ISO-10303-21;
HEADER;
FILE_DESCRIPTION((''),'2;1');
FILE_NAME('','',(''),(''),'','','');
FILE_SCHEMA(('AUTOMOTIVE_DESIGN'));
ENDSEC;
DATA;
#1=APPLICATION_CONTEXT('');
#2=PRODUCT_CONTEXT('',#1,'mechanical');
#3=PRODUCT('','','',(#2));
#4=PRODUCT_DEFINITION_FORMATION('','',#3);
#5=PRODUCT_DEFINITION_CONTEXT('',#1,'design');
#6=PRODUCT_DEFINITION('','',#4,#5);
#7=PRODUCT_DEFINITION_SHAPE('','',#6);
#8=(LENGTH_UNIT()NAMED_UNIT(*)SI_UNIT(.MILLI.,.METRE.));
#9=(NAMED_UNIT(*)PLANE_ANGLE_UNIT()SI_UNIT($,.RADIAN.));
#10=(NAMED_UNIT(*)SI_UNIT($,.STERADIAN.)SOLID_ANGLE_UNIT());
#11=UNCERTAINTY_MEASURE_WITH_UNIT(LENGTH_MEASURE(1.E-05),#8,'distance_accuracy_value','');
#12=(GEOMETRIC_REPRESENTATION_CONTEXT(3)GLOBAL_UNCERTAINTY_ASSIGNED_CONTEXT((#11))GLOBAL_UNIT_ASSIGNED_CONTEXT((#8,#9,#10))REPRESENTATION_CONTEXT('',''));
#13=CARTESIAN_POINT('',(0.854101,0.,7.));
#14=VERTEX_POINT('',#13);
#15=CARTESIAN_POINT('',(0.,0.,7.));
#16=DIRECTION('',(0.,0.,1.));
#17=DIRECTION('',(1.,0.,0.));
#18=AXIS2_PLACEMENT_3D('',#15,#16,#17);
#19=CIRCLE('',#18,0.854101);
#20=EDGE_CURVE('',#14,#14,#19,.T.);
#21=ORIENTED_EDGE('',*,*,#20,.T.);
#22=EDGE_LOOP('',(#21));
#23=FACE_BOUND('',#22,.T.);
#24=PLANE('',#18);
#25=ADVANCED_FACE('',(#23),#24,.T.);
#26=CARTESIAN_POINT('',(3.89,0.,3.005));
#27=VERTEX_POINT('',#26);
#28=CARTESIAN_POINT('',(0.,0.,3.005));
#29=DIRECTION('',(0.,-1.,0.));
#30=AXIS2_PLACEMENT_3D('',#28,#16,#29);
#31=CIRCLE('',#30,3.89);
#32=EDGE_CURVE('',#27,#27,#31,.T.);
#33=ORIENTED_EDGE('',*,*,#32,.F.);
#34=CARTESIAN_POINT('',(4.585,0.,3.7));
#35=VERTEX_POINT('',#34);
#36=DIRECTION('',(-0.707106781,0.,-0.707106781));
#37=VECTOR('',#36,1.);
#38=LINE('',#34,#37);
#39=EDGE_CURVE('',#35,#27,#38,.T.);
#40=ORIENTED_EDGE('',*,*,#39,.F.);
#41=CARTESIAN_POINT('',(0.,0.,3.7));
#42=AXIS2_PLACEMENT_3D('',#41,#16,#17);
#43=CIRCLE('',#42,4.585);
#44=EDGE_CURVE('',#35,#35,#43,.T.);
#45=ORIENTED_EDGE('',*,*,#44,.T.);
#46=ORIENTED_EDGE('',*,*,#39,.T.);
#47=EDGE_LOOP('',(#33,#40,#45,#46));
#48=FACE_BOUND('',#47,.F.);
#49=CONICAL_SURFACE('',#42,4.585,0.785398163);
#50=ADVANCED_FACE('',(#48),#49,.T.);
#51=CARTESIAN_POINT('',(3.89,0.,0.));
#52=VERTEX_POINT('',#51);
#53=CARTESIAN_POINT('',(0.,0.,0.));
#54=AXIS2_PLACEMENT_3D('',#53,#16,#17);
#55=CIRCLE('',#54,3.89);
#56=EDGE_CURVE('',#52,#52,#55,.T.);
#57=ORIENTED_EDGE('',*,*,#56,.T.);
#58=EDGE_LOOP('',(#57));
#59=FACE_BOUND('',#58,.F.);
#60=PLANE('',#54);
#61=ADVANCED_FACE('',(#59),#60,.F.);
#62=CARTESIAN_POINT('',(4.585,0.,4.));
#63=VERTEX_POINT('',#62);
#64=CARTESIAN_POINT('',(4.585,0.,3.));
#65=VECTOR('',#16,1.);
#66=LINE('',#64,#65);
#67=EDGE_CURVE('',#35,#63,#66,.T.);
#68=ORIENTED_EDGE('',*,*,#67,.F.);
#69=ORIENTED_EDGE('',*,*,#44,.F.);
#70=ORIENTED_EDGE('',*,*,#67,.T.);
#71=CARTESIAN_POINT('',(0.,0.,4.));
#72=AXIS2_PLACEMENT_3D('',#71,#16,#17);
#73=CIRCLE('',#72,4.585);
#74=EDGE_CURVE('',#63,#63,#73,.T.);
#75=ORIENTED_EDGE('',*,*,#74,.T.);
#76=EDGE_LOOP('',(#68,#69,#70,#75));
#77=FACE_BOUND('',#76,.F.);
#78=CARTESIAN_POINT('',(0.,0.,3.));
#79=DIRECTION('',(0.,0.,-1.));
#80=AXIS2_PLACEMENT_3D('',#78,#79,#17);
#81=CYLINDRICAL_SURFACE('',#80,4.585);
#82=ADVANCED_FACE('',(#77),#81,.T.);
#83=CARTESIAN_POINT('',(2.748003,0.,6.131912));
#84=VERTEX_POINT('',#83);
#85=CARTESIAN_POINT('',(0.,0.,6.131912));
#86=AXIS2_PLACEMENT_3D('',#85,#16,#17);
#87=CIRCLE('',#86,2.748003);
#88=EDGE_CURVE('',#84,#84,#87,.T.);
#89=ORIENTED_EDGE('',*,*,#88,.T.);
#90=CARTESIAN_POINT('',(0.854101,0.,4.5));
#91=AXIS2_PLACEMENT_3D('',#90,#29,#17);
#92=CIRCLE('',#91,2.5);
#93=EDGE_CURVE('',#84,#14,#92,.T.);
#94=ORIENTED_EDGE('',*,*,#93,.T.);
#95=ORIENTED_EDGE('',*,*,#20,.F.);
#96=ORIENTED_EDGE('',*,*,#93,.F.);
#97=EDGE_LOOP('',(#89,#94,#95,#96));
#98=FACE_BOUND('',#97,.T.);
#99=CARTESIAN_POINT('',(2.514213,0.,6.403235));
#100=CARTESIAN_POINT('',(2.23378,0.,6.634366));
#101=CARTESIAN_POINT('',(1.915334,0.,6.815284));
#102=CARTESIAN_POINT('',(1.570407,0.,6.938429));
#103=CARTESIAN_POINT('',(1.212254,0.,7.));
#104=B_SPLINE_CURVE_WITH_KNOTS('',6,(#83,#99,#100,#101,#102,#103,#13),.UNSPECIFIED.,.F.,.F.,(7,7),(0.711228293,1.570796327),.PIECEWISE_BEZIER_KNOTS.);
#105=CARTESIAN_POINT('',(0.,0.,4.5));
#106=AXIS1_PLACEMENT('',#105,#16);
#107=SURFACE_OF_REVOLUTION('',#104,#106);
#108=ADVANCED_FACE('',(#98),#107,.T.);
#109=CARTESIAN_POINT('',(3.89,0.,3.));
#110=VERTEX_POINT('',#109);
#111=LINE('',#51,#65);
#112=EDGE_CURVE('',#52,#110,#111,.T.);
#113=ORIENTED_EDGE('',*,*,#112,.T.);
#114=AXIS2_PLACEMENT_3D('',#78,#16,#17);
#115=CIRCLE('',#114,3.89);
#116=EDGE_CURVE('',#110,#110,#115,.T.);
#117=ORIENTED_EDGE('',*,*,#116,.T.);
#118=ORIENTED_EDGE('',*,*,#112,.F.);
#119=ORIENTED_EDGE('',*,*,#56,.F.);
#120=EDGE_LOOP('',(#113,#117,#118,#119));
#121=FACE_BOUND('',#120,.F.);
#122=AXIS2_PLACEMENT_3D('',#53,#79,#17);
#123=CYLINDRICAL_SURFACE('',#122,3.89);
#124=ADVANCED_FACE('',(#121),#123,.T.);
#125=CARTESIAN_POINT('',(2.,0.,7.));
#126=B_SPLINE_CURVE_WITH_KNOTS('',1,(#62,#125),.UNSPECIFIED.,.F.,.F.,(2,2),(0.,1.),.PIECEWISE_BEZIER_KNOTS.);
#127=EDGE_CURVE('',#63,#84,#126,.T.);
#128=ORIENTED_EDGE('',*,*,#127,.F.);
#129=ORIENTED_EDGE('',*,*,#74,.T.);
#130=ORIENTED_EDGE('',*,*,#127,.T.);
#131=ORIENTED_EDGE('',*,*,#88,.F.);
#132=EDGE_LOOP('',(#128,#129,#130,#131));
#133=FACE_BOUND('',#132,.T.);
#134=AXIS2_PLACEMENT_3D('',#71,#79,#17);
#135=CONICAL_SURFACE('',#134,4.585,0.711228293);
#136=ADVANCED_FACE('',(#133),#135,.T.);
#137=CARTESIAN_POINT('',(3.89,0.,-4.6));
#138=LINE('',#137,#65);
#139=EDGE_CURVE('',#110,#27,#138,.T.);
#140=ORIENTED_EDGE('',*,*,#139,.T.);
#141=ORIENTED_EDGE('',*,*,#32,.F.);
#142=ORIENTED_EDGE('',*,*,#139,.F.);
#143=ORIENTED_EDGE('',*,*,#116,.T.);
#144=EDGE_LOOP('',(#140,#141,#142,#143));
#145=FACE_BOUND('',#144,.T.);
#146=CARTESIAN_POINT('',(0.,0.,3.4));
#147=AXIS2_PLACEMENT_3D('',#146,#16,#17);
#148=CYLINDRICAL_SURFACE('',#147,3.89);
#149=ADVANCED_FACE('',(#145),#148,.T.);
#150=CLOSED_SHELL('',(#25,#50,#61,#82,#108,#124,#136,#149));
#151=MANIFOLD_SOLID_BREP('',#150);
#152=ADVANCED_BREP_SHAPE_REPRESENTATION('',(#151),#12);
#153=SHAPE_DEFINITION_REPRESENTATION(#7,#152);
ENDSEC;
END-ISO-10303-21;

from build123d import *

# Parameters (mm, degrees)
F0_R        = 3.89
F1_DEPTH    = 3
F2_R        = 4.585
F2_R_2      = 3.89
F5_DEPTH    = 1
F5_FACE_R   = 4.585
F4_R        = 2
F7_R        = 2.5
F8_S5_R     = 3.89
F8_T6_DEPTH = 8


# Not quite as in the source:
# - a fillet or chamfer that OpenCascade refuses, or shapes differently, is made with other operations: its cross-section is extruded or revolved along the edge and cut away or added


with BuildPart() as f1:
    # F0 (on Top) → F1 (new body)
    with BuildSketch(Plane.XY):
        Circle(F0_R)
    extrude(amount=F1_DEPTH)

    # F2 (on face) → F5 (join)
    with BuildSketch(Plane.XY.offset(3)):
        Circle(F2_R)
        Circle(F2_R_2, mode=Mode.SUBTRACT)
        Circle(F2_R_2)
    extrude(amount=F5_DEPTH)

    # F5_face (on face) → F6 section 0
    with BuildSketch(Plane.XY.offset(4)):
        Circle(F5_FACE_R)
    # F4 (on offset) → F6 section 1
    with BuildSketch(Plane.XY.offset(7)):
        Circle(F4_R)
    loft()

    # F7
    f7_edges = [f1.edges().sort_by_distance(p)[0] for p in [
        (-2, 0, 7),
    ]]
    fillet(f7_edges, radius=F7_R)

    # F8: chamfer of 0.7 on 1 edges, made by hand


with BuildPart() as f8_tool2:
    # F8_s3 → F8_t4 (revolve)
    with BuildSketch(Plane.XZ):
        Polygon((4.585, 3.7), (3.885, 3), (4.585, 3), align=None)
    revolve(axis=Axis((0, 0, 3), (0, 0, 1)))

    # F8_s5 → F8_t6 (cut, symmetric)
    with BuildSketch(Plane.XY.offset(3.4)):
        Circle(F8_S5_R)
    extrude(amount=F8_T6_DEPTH, both=True, mode=Mode.SUBTRACT)


with BuildPart() as f1_1:
    add(f1.part)

    # F8_t1: cut F8_tool2
    add(f8_tool2.part, mode=Mode.SUBTRACT)


solid = f1_1.part
